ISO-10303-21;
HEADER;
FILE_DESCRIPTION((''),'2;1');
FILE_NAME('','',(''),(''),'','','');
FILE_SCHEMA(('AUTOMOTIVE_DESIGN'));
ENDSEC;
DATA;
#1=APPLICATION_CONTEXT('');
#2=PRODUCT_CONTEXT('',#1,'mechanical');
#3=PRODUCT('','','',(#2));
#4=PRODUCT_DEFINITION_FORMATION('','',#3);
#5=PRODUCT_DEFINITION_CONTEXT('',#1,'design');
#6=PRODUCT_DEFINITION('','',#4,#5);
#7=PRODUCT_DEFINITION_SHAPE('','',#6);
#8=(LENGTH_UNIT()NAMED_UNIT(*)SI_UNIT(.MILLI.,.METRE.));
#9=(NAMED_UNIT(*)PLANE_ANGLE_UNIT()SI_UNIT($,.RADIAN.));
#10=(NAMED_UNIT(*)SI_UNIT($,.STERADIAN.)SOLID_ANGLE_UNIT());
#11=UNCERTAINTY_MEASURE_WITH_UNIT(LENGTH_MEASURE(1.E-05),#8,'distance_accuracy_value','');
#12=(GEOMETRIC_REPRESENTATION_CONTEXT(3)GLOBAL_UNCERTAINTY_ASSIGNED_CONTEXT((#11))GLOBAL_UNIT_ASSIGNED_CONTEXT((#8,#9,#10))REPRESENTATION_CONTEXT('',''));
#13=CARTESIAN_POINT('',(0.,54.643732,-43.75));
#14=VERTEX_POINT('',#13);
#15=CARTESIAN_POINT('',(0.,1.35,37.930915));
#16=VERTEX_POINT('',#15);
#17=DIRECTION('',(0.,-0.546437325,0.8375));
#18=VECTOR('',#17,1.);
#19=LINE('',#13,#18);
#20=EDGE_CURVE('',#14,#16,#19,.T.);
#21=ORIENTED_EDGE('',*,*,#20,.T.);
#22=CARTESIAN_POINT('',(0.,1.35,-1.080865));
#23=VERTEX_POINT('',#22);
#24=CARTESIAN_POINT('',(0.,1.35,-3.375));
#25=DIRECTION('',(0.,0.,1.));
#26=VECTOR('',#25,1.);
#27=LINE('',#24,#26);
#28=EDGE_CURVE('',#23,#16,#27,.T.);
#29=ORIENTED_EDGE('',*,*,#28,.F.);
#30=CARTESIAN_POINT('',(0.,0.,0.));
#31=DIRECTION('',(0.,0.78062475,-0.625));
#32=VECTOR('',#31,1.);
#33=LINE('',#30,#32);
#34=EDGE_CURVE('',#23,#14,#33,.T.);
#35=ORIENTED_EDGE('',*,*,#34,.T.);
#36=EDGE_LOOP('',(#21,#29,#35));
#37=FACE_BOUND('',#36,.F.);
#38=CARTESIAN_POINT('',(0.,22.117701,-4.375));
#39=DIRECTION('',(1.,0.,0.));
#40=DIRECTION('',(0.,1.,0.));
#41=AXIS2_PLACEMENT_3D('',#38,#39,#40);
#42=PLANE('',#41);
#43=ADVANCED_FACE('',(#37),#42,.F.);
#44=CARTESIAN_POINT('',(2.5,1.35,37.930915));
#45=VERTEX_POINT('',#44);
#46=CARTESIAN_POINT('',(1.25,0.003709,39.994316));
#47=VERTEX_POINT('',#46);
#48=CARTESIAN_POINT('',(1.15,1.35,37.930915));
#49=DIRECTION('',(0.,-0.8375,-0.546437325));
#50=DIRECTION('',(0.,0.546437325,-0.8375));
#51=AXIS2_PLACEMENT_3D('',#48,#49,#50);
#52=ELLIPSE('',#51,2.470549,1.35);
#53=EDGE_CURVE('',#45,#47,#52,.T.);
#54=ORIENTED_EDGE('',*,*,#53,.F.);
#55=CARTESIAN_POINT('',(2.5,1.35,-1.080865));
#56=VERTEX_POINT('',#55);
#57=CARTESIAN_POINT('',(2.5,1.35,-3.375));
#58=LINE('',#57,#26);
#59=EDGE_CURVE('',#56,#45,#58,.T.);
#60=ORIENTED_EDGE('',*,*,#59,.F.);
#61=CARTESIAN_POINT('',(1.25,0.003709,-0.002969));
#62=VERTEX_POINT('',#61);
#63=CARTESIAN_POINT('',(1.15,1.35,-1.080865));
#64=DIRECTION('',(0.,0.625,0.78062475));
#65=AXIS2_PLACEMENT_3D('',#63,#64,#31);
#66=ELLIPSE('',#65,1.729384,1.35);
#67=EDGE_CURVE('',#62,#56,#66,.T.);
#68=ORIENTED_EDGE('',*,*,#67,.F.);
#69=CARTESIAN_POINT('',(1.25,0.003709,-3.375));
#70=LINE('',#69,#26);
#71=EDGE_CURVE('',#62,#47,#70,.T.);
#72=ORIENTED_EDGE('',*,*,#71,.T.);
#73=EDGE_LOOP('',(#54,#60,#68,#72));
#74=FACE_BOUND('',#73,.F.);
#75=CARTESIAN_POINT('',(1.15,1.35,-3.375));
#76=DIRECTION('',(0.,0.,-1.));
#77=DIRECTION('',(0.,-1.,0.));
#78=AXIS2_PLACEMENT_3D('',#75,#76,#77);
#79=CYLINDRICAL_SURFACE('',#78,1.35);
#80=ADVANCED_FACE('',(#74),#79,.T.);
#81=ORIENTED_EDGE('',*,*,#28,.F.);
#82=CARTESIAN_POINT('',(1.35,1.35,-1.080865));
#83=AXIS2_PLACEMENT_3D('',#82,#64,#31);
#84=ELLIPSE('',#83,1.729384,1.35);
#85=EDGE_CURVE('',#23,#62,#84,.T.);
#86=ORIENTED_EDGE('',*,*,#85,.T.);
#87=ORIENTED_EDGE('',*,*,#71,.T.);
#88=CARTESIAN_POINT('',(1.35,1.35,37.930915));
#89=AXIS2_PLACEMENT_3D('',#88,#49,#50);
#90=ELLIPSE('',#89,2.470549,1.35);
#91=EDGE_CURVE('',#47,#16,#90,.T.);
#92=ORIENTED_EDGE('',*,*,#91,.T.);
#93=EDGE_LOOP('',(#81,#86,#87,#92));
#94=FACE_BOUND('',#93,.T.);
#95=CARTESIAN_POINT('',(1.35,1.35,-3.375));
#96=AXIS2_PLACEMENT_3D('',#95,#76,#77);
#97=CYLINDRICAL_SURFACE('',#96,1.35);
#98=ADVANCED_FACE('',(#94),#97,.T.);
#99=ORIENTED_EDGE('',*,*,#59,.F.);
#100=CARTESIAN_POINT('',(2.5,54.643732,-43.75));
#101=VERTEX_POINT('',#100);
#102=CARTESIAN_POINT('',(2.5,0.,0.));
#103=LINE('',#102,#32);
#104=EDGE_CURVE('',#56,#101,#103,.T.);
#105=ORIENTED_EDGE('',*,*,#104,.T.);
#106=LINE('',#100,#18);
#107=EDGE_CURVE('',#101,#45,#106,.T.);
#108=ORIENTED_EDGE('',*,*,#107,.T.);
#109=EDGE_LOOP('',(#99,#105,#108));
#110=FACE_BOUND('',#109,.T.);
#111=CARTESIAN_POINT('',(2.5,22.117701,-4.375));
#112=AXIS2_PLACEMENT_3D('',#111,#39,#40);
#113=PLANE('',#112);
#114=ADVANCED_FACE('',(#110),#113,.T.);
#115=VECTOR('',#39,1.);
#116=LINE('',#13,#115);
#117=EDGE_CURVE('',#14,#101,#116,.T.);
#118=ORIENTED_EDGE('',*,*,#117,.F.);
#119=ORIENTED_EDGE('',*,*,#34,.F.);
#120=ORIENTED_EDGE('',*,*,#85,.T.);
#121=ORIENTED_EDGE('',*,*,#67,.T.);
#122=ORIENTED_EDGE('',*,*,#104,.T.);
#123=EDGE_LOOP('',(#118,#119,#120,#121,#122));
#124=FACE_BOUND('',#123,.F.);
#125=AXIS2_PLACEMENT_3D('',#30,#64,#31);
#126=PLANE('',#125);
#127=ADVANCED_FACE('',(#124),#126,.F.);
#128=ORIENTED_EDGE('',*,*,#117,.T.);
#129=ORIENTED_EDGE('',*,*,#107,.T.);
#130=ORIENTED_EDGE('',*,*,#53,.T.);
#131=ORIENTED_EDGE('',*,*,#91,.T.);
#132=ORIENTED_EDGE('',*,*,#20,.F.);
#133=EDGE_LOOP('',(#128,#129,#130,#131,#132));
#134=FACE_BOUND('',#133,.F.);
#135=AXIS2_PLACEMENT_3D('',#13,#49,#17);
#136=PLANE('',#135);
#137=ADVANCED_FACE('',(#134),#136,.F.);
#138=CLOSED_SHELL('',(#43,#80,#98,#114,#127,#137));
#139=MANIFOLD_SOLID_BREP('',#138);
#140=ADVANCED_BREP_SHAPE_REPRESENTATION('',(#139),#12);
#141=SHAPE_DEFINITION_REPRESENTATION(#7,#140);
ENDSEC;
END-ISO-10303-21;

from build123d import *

# Parameters (mm, degrees)
F1_DEPTH    = 2.5
F2_T1_DEPTH = 46.75


# Not quite as in the source:
# - a fillet or chamfer that OpenCascade refuses, or shapes differently, is made with other operations: its cross-section is extruded or revolved along the edge and cut away or added


with BuildPart() as f1:
    # F0 (on Right) → F1 (new body)
    with BuildSketch(Plane.YZ):
        Polygon((0, 40), (0, 0), (54.643732486, -43.75), align=None)
    extrude(amount=F1_DEPTH)

    # F2: fillet of radius 1.35 on 2 edges, made by hand

    # F2_s2 → F2_t1 (cut)
    with BuildSketch(Plane.XY.offset(-3.375)):
        with BuildLine():
            ThreePointArc((1.15, 0), (2.1045941546, 0.3954058454), (2.5, 1.35))
            Line((2.5, 1.35), (2.5, 0))
            Line((2.5, 0), (1.15, 0))
        make_face()
        with BuildLine():
            ThreePointArc((1.35, 0), (0.3954058454, 0.3954058454), (0, 1.35))
            Line((0, 1.35), (0, 0))
            Line((0, 0), (1.35, 0))
        make_face()
    extrude(amount=F2_T1_DEPTH, mode=Mode.SUBTRACT)


solid = f1.part
